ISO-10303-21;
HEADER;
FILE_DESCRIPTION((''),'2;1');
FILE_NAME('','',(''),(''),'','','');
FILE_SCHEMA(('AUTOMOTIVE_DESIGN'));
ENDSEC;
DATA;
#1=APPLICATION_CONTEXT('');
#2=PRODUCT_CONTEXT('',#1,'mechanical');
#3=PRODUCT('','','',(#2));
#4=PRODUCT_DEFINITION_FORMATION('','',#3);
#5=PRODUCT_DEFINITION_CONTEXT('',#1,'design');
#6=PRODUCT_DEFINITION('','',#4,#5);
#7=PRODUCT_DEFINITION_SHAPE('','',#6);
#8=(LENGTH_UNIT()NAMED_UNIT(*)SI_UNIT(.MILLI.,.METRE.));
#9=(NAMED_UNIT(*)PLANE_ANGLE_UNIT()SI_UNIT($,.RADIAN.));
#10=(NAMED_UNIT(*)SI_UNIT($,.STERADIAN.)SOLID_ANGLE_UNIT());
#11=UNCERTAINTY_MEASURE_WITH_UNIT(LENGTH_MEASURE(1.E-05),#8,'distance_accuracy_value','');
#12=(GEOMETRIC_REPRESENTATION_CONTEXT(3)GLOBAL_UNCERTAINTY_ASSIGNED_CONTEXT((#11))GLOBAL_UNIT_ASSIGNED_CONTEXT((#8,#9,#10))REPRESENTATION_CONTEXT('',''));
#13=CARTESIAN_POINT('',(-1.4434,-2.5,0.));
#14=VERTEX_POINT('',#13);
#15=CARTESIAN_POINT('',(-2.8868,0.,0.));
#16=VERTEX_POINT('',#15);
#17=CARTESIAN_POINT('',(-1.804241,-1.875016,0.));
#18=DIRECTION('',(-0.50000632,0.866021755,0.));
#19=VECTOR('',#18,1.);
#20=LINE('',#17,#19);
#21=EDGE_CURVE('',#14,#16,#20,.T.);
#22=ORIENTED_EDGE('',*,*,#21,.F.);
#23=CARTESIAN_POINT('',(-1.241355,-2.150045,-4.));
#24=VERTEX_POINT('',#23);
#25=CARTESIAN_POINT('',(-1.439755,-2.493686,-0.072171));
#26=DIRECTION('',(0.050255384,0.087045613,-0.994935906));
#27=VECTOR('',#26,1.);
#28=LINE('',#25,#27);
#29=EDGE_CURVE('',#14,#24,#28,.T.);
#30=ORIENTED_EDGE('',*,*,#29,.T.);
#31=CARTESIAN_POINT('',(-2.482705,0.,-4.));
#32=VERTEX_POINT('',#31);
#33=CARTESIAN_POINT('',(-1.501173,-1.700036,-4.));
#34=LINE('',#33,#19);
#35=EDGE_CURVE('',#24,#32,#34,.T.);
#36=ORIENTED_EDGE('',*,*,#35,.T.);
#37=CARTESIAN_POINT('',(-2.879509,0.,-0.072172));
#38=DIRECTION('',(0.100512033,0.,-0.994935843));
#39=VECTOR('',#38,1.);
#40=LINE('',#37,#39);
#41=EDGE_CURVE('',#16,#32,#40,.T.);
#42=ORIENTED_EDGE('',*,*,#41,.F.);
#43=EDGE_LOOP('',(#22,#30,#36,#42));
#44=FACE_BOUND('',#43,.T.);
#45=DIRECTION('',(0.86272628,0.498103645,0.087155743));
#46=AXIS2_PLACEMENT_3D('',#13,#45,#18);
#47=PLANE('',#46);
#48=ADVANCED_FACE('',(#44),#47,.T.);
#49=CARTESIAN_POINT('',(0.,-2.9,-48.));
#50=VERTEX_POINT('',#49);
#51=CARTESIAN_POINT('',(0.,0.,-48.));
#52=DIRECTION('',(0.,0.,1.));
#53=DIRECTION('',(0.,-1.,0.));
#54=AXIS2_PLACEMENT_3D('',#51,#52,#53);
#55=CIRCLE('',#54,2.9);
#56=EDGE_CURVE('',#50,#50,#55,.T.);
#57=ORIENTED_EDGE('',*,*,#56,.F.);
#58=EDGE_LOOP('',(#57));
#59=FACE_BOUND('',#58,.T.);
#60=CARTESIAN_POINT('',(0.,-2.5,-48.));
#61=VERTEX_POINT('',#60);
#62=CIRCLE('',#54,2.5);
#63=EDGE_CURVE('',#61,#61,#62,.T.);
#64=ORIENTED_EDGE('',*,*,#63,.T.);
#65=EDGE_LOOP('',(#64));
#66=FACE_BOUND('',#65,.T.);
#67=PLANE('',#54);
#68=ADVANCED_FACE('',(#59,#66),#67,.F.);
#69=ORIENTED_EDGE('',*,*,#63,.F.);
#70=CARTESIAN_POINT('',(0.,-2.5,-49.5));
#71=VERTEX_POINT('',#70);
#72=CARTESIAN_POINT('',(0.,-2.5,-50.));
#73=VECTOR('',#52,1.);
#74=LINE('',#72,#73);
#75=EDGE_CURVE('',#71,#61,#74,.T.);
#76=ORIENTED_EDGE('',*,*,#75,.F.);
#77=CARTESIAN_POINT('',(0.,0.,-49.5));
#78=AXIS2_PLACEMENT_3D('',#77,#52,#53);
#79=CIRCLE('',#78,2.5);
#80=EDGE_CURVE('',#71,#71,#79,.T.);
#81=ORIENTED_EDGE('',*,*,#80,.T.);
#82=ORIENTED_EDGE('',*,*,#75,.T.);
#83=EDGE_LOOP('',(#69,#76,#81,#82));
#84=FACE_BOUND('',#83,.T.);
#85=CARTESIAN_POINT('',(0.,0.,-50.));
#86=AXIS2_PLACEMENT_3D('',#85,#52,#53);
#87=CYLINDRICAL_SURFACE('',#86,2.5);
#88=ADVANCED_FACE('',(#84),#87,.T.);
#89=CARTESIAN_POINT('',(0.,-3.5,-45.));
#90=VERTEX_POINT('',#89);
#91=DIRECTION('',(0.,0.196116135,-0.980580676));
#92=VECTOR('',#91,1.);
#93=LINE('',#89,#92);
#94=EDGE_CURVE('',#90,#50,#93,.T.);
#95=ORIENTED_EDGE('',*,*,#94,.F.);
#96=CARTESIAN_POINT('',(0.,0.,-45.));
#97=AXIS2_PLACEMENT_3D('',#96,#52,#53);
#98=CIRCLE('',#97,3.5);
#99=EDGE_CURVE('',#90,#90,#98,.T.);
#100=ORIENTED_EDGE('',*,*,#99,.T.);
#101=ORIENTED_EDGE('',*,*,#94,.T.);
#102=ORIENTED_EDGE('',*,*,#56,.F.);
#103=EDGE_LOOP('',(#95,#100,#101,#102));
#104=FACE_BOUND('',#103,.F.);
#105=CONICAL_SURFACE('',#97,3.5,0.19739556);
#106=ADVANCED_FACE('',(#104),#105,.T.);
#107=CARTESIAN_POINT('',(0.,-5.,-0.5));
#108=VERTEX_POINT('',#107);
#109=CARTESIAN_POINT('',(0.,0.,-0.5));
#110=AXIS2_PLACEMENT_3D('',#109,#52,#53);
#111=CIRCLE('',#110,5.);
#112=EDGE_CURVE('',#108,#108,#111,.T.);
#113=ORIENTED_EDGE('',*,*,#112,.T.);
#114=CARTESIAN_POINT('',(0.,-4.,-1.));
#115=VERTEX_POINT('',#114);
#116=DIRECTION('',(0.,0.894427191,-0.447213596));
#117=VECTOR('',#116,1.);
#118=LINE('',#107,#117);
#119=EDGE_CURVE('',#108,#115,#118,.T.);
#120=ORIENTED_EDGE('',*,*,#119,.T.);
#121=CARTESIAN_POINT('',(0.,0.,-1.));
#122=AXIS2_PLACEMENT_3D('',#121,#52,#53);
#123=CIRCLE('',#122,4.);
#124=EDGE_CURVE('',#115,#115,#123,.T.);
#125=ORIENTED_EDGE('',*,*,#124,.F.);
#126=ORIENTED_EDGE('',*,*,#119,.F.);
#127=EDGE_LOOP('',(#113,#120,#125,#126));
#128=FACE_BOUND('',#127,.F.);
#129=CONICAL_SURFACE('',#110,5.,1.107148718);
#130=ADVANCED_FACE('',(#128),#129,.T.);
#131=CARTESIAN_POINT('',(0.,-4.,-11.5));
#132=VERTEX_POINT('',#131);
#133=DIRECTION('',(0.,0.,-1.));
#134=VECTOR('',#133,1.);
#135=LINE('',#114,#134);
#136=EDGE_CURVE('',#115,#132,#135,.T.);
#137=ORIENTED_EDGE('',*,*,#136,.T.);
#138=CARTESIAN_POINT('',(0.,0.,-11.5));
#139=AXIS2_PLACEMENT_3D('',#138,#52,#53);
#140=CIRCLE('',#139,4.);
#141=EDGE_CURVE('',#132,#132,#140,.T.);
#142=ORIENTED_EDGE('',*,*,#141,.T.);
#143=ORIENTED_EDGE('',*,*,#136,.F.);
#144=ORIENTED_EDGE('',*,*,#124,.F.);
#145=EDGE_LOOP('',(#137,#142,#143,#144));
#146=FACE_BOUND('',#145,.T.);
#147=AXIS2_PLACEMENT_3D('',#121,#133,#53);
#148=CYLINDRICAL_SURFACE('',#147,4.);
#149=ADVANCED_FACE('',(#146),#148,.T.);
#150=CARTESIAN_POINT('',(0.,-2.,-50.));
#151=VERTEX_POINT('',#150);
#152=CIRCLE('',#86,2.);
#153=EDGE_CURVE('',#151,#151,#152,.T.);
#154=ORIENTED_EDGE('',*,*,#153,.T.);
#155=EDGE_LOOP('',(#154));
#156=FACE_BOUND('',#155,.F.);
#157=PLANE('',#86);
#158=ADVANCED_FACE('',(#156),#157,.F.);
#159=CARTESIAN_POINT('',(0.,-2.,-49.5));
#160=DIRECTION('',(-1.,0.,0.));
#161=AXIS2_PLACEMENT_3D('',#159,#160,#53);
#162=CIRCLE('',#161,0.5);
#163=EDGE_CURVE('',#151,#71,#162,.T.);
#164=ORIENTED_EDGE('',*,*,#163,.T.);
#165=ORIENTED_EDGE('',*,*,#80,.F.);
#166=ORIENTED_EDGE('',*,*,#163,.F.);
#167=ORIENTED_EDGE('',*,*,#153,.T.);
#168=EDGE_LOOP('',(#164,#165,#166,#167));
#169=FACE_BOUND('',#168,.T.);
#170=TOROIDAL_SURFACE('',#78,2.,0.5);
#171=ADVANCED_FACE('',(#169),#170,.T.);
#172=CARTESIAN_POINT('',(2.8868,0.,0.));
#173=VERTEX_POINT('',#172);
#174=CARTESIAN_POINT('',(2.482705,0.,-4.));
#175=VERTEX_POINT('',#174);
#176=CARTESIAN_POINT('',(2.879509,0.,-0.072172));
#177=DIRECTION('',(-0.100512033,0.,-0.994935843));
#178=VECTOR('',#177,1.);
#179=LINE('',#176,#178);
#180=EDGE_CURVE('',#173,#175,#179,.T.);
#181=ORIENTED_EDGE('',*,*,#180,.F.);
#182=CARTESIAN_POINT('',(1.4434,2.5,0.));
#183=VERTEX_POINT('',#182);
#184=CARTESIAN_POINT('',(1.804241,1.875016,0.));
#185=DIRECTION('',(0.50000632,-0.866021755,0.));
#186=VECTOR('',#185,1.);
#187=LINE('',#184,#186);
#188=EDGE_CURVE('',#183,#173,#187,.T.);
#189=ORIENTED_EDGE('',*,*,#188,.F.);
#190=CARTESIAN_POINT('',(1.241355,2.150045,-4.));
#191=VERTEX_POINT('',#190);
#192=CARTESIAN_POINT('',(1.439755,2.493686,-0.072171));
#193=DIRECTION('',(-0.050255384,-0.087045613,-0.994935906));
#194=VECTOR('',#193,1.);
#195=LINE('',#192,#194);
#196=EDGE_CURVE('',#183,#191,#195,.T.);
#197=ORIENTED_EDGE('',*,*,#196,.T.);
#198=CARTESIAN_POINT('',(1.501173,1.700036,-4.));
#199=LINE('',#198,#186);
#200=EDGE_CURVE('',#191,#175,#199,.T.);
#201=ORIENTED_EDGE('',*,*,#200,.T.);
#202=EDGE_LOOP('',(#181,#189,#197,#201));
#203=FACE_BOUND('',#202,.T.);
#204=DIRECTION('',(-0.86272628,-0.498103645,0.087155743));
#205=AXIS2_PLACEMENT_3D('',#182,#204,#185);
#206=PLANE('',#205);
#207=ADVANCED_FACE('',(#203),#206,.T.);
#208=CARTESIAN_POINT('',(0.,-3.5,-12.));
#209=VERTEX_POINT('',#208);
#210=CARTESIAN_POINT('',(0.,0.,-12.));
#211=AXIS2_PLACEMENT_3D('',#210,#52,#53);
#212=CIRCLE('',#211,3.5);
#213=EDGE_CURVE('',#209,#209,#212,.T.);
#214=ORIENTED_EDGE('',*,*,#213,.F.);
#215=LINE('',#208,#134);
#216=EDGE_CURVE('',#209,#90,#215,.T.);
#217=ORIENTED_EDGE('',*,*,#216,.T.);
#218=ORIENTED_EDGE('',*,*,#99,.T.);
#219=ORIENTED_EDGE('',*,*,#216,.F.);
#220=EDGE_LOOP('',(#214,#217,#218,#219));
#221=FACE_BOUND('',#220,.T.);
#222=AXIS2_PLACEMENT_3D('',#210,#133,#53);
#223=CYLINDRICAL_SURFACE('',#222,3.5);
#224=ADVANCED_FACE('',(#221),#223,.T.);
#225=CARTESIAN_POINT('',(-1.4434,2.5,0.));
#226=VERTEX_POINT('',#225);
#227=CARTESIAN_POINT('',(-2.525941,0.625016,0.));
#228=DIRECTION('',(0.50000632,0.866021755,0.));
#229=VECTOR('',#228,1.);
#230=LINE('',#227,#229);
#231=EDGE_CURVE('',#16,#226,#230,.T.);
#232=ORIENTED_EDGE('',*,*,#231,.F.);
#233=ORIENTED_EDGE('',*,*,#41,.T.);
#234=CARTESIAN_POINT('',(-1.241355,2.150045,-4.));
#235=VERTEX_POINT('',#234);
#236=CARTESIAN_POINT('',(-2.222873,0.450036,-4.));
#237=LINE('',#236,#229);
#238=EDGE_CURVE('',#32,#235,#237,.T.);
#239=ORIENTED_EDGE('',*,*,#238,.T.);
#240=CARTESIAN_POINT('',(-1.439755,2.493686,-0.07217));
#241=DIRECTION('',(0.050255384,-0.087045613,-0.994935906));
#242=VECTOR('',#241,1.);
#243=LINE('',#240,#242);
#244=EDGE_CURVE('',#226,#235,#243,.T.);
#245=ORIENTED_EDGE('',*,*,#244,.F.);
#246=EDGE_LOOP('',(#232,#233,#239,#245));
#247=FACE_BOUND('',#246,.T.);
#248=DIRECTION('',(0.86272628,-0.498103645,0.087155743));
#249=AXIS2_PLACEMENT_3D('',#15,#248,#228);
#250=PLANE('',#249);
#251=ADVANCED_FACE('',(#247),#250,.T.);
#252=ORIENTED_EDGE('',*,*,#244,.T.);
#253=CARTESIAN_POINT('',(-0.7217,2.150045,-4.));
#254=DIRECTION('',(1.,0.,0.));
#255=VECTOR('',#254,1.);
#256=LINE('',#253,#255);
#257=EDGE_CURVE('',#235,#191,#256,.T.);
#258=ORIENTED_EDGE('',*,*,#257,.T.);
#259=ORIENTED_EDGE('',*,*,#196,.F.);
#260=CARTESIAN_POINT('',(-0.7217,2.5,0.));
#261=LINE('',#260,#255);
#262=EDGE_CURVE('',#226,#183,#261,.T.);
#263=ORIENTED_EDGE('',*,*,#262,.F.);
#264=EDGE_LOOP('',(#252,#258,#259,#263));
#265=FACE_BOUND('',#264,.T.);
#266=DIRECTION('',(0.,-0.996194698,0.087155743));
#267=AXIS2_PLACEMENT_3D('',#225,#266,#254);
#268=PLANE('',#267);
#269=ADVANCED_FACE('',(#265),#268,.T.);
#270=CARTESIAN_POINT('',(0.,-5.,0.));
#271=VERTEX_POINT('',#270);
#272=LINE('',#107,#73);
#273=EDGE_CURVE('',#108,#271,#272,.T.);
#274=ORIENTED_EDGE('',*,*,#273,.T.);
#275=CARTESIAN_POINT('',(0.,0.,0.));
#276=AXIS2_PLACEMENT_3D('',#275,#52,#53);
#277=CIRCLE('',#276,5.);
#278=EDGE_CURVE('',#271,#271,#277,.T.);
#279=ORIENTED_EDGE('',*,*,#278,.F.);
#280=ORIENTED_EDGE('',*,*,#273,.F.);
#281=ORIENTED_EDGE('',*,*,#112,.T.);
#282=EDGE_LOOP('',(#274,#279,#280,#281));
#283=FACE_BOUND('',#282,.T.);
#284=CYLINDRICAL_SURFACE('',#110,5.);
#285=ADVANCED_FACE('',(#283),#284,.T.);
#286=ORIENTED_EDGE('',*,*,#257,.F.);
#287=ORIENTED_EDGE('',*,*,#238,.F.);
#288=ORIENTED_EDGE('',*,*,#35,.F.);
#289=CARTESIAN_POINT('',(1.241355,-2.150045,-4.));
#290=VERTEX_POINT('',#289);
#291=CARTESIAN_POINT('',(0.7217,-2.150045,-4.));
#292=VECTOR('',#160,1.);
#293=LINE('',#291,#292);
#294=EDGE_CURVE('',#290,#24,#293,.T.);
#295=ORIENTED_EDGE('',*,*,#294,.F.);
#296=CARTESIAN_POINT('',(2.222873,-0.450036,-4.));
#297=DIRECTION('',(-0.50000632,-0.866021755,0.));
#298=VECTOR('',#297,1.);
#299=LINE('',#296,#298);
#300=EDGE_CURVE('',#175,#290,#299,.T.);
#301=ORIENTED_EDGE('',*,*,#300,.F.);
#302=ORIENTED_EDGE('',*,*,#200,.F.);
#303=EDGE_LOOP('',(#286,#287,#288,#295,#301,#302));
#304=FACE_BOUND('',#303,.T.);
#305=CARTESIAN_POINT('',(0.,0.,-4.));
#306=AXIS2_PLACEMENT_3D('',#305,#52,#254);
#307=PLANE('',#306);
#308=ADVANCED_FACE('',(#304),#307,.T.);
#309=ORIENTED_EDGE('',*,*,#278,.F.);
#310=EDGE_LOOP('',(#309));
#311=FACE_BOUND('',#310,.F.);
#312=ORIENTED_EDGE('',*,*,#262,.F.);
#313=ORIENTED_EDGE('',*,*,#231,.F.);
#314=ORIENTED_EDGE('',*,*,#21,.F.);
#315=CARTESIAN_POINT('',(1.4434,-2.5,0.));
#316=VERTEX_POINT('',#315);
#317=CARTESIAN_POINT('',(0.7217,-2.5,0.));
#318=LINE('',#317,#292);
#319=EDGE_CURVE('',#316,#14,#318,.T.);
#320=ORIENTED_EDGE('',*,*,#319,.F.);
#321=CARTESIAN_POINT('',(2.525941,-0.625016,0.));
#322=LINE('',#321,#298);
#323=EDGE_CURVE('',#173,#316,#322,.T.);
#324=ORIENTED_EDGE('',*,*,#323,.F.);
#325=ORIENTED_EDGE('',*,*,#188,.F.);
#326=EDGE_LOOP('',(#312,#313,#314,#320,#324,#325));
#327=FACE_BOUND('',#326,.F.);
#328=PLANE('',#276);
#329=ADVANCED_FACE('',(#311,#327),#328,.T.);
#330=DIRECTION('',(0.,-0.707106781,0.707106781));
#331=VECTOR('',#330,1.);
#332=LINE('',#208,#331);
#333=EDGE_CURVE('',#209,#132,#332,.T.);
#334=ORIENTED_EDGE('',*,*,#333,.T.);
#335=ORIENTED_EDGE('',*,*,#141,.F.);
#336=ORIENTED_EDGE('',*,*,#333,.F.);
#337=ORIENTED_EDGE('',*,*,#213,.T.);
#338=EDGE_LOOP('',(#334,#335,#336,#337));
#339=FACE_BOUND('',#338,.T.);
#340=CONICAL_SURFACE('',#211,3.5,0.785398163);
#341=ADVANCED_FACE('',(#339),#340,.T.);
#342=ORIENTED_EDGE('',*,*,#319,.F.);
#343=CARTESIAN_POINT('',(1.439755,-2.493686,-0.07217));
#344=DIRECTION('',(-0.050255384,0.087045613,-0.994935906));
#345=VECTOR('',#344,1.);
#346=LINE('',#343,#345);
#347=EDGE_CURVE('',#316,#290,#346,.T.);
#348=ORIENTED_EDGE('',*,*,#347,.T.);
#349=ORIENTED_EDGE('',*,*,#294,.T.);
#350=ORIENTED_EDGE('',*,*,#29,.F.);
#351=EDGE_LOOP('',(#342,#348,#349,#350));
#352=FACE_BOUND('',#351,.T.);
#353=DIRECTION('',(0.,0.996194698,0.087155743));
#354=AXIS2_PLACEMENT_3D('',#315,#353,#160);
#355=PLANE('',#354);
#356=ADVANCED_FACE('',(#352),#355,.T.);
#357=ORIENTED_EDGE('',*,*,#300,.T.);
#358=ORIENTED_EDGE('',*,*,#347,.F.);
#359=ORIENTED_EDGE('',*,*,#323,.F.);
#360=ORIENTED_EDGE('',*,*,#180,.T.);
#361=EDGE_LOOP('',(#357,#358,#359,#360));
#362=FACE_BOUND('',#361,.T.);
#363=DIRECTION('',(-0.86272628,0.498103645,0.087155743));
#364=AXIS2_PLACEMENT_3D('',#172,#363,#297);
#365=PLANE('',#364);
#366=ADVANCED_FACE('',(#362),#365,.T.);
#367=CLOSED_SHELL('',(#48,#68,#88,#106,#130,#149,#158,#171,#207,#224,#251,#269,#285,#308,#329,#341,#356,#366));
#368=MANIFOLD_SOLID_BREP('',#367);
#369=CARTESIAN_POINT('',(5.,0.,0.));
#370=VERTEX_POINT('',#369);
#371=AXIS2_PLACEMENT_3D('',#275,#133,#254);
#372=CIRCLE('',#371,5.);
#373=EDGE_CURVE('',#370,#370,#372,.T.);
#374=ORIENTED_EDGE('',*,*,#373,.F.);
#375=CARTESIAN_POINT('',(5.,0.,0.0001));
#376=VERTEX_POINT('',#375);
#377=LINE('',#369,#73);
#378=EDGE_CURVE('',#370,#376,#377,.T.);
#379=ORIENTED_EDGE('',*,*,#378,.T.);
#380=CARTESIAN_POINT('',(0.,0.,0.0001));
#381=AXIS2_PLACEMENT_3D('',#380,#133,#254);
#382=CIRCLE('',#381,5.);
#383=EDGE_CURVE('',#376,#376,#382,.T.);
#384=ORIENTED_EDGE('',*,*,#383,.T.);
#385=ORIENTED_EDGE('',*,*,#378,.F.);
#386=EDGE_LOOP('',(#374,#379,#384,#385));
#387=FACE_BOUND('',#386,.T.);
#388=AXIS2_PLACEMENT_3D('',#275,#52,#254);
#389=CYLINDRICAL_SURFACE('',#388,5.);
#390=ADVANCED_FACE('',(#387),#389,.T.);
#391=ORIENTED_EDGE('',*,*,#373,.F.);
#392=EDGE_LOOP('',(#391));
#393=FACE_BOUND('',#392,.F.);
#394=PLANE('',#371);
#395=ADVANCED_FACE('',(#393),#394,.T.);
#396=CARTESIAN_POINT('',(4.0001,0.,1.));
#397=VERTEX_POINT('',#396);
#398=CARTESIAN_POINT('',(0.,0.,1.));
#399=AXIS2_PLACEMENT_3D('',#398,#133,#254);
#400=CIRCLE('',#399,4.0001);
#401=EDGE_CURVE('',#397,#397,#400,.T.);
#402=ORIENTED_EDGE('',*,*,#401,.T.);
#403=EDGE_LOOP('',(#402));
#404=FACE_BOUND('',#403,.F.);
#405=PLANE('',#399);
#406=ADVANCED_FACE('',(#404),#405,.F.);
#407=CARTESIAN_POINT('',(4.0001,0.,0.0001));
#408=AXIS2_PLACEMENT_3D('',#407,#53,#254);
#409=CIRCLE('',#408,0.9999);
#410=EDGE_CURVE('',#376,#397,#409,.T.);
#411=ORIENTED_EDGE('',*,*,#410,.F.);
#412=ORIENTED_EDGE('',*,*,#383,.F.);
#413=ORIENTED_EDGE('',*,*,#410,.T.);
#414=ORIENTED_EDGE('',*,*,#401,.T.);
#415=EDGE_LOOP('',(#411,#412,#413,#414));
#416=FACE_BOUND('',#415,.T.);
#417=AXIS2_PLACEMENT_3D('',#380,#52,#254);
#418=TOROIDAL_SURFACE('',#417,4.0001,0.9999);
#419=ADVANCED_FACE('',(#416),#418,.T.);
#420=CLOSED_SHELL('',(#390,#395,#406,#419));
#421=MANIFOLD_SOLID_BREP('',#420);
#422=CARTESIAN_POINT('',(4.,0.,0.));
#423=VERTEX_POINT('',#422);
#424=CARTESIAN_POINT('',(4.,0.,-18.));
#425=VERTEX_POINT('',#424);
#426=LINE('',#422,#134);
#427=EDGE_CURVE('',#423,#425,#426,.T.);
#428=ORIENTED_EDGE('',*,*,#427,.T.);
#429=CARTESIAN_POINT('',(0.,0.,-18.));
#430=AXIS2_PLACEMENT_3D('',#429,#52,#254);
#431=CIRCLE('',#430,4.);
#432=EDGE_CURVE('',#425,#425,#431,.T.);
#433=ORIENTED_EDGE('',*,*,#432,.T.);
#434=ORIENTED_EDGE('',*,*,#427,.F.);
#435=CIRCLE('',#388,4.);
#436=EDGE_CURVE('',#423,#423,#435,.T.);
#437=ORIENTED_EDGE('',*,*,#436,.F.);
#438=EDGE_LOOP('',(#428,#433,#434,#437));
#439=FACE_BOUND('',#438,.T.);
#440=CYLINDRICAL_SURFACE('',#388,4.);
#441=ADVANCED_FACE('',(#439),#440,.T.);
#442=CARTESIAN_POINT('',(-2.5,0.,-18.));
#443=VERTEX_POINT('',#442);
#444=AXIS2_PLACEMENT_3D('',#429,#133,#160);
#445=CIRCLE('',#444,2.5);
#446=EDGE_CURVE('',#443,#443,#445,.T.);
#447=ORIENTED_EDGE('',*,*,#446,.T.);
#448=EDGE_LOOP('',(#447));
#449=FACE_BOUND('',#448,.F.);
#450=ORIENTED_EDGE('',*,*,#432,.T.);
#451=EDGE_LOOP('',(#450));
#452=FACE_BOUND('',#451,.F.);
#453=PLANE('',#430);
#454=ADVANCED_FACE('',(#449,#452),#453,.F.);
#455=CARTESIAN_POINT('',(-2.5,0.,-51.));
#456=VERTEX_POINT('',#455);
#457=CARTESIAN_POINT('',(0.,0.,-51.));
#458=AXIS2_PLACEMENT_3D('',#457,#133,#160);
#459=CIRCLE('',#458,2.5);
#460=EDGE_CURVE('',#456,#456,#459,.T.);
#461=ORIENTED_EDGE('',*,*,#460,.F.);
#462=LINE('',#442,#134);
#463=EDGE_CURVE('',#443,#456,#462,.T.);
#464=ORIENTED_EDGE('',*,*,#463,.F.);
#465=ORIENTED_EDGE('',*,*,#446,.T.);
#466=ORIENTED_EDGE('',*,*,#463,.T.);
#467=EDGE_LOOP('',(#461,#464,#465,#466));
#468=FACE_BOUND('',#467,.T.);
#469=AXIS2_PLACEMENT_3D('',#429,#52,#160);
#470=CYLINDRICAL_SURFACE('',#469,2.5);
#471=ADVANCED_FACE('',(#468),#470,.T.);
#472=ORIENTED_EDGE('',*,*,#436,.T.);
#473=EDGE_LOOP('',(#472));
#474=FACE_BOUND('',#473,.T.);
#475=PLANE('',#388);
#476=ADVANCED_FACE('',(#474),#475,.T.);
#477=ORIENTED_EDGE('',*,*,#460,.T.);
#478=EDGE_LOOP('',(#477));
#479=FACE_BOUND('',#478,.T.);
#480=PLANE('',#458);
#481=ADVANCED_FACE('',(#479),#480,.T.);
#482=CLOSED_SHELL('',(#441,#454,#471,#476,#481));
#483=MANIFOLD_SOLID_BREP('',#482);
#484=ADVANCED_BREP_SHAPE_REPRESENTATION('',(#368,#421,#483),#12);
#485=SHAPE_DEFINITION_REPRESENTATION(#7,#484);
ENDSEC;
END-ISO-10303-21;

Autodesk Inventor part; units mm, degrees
ref_plane "YZ Plane" through (0, 0, 0) normal (1, 0, 0) x (0, 1, 0)
ref_plane "XZ Plane" through (0, 0, 0) normal (0, 1, 0) x (-1, 0, 0)
ref_plane "XY Plane" through (0, 0, 0) normal (0, 0, 1) x (1, 0, 0)
sketch "Sketch2" plane through (0, 0, 0) normal (1, 0, 0) x (0, 1, 0)
  line L0 (0, 0) -> (-5, 0)
  line L1 (-5, -0.5) -> (-4, -1)
  line L2 (-3.5, -12) -> (-3.5, -45)
  line L3 (-3.5, -45) -> (-2.9, -48)
  line L4 (0, -50) -> (0, 0)
  line L5 (-5, -0.5) -> (-5, 0)
  line L6 (-2.5, -50) -> (0, -50)
  line L7 (-2.5, -50) -> (-2.5, -48)
  line L8 (-2.5, -48) -> (-2.9, -48)
  line L9 (-4, -1) -> (-4, -11.5)
  line L10 (-3.5, -12) -> (-4, -11.5)
  dimension "d0" = 10
  dimension "d1" = 5
  dimension "d2" = 7
  dimension "d3" = 3
  dimension "d4" = 2
  dimension "d5" = 0.6
  dimension "Length" = 50
  dimension "d7" = 8
  dimension "d9" = 0.5
  dimension "d10" = 1
  dimension "d17" = 12
  dimension "d18" = 135
revolve "Revolution1" add sketch "Sketch2" angle 360 about axis through (0, 0, -50) along (0, 0, 1)
thread "Thread1" size "TR8x1.5" class "7e" standard "ISO Metric Trapezoidal Threads" full length
sketch "Sketch3" plane through (0, 0, 0) normal (0, 0, 1) x (1, 0, 0)
  circle A0 centre (0, 0) radius 5 projected
  circle A1 centre (0, 0) radius 2.5 construction
  line L0 (1.4434, 2.5) -> (2.8868, 0)
  line L1 (2.8868, 0) -> (1.4434, -2.5)
  line L2 (1.4434, -2.5) -> (-1.4434, -2.5)
  line L3 (-1.4434, -2.5) -> (-2.8868, 0)
  line L4 (-2.8868, 0) -> (-1.4434, 2.5)
  line L5 (-1.4434, 2.5) -> (1.4434, 2.5)
  point P0 (0, 2.5)
  dimension "d14" = 5
extrude "Extrusion1" cut sketch "Sketch3" against normal blind 4 draft -5 contours L0 L1 L2 L3 L4 L5
fillet "Fillet1" radius 0.5 1 edges at (0, 2.5, -50)
sketch "Sketch4" plane through (0, 0, 0) normal (0, 0, 1) x (1, 0, 0)
  circle A0 centre (0, 0) radius 5 construction
  circle A1 centre (0, 0) radius 4
  dimension "d20" = 8
extrude "Extrusion2" add sketch "Sketch4" against normal blind 18 separate body
sketch "Sketch5" plane through (0, 0, -18) normal (0, 0, -1) x (-1, 0, 0)
  circle A0 centre (0, 0) radius 4 projected
  circle A1 centre (0, 0) radius 2.5
  dimension "d23" = 5
extrude "Extrusion3" add sketch "Sketch5" along normal blind 33 contours A1 bodies 2
sketch "Sketch6" plane through (0, 0, 0) normal (0, 1, 0) x (-1, 0, 0)
  line L0 (0, 0) -> (-5, 0)
  line L1 (-5, 0) -> (-5, 1)
  line L2 (-5, 1) -> (0, 1)
  line L3 (0, 1) -> (0, 0)
  dimension "d26" = 10
  dimension "d27" = 1
revolve "Revolution2" add sketch "Sketch6" angle 360 about axis through (0, 0, 1) along (0, 0, -1) separate body
fillet "Fillet2" radius 1 1 edges at (-5, 0, 1)
equation "\"Pillar_Board_Thickness\" = 18"
equation "\"d31\" = -0.5 * Pillar_Board_Thickness"
properties part number "Confirmat L50 & Cap D10 NB T18 PB T 18" material "Nickel-Copper Alloy 400"
